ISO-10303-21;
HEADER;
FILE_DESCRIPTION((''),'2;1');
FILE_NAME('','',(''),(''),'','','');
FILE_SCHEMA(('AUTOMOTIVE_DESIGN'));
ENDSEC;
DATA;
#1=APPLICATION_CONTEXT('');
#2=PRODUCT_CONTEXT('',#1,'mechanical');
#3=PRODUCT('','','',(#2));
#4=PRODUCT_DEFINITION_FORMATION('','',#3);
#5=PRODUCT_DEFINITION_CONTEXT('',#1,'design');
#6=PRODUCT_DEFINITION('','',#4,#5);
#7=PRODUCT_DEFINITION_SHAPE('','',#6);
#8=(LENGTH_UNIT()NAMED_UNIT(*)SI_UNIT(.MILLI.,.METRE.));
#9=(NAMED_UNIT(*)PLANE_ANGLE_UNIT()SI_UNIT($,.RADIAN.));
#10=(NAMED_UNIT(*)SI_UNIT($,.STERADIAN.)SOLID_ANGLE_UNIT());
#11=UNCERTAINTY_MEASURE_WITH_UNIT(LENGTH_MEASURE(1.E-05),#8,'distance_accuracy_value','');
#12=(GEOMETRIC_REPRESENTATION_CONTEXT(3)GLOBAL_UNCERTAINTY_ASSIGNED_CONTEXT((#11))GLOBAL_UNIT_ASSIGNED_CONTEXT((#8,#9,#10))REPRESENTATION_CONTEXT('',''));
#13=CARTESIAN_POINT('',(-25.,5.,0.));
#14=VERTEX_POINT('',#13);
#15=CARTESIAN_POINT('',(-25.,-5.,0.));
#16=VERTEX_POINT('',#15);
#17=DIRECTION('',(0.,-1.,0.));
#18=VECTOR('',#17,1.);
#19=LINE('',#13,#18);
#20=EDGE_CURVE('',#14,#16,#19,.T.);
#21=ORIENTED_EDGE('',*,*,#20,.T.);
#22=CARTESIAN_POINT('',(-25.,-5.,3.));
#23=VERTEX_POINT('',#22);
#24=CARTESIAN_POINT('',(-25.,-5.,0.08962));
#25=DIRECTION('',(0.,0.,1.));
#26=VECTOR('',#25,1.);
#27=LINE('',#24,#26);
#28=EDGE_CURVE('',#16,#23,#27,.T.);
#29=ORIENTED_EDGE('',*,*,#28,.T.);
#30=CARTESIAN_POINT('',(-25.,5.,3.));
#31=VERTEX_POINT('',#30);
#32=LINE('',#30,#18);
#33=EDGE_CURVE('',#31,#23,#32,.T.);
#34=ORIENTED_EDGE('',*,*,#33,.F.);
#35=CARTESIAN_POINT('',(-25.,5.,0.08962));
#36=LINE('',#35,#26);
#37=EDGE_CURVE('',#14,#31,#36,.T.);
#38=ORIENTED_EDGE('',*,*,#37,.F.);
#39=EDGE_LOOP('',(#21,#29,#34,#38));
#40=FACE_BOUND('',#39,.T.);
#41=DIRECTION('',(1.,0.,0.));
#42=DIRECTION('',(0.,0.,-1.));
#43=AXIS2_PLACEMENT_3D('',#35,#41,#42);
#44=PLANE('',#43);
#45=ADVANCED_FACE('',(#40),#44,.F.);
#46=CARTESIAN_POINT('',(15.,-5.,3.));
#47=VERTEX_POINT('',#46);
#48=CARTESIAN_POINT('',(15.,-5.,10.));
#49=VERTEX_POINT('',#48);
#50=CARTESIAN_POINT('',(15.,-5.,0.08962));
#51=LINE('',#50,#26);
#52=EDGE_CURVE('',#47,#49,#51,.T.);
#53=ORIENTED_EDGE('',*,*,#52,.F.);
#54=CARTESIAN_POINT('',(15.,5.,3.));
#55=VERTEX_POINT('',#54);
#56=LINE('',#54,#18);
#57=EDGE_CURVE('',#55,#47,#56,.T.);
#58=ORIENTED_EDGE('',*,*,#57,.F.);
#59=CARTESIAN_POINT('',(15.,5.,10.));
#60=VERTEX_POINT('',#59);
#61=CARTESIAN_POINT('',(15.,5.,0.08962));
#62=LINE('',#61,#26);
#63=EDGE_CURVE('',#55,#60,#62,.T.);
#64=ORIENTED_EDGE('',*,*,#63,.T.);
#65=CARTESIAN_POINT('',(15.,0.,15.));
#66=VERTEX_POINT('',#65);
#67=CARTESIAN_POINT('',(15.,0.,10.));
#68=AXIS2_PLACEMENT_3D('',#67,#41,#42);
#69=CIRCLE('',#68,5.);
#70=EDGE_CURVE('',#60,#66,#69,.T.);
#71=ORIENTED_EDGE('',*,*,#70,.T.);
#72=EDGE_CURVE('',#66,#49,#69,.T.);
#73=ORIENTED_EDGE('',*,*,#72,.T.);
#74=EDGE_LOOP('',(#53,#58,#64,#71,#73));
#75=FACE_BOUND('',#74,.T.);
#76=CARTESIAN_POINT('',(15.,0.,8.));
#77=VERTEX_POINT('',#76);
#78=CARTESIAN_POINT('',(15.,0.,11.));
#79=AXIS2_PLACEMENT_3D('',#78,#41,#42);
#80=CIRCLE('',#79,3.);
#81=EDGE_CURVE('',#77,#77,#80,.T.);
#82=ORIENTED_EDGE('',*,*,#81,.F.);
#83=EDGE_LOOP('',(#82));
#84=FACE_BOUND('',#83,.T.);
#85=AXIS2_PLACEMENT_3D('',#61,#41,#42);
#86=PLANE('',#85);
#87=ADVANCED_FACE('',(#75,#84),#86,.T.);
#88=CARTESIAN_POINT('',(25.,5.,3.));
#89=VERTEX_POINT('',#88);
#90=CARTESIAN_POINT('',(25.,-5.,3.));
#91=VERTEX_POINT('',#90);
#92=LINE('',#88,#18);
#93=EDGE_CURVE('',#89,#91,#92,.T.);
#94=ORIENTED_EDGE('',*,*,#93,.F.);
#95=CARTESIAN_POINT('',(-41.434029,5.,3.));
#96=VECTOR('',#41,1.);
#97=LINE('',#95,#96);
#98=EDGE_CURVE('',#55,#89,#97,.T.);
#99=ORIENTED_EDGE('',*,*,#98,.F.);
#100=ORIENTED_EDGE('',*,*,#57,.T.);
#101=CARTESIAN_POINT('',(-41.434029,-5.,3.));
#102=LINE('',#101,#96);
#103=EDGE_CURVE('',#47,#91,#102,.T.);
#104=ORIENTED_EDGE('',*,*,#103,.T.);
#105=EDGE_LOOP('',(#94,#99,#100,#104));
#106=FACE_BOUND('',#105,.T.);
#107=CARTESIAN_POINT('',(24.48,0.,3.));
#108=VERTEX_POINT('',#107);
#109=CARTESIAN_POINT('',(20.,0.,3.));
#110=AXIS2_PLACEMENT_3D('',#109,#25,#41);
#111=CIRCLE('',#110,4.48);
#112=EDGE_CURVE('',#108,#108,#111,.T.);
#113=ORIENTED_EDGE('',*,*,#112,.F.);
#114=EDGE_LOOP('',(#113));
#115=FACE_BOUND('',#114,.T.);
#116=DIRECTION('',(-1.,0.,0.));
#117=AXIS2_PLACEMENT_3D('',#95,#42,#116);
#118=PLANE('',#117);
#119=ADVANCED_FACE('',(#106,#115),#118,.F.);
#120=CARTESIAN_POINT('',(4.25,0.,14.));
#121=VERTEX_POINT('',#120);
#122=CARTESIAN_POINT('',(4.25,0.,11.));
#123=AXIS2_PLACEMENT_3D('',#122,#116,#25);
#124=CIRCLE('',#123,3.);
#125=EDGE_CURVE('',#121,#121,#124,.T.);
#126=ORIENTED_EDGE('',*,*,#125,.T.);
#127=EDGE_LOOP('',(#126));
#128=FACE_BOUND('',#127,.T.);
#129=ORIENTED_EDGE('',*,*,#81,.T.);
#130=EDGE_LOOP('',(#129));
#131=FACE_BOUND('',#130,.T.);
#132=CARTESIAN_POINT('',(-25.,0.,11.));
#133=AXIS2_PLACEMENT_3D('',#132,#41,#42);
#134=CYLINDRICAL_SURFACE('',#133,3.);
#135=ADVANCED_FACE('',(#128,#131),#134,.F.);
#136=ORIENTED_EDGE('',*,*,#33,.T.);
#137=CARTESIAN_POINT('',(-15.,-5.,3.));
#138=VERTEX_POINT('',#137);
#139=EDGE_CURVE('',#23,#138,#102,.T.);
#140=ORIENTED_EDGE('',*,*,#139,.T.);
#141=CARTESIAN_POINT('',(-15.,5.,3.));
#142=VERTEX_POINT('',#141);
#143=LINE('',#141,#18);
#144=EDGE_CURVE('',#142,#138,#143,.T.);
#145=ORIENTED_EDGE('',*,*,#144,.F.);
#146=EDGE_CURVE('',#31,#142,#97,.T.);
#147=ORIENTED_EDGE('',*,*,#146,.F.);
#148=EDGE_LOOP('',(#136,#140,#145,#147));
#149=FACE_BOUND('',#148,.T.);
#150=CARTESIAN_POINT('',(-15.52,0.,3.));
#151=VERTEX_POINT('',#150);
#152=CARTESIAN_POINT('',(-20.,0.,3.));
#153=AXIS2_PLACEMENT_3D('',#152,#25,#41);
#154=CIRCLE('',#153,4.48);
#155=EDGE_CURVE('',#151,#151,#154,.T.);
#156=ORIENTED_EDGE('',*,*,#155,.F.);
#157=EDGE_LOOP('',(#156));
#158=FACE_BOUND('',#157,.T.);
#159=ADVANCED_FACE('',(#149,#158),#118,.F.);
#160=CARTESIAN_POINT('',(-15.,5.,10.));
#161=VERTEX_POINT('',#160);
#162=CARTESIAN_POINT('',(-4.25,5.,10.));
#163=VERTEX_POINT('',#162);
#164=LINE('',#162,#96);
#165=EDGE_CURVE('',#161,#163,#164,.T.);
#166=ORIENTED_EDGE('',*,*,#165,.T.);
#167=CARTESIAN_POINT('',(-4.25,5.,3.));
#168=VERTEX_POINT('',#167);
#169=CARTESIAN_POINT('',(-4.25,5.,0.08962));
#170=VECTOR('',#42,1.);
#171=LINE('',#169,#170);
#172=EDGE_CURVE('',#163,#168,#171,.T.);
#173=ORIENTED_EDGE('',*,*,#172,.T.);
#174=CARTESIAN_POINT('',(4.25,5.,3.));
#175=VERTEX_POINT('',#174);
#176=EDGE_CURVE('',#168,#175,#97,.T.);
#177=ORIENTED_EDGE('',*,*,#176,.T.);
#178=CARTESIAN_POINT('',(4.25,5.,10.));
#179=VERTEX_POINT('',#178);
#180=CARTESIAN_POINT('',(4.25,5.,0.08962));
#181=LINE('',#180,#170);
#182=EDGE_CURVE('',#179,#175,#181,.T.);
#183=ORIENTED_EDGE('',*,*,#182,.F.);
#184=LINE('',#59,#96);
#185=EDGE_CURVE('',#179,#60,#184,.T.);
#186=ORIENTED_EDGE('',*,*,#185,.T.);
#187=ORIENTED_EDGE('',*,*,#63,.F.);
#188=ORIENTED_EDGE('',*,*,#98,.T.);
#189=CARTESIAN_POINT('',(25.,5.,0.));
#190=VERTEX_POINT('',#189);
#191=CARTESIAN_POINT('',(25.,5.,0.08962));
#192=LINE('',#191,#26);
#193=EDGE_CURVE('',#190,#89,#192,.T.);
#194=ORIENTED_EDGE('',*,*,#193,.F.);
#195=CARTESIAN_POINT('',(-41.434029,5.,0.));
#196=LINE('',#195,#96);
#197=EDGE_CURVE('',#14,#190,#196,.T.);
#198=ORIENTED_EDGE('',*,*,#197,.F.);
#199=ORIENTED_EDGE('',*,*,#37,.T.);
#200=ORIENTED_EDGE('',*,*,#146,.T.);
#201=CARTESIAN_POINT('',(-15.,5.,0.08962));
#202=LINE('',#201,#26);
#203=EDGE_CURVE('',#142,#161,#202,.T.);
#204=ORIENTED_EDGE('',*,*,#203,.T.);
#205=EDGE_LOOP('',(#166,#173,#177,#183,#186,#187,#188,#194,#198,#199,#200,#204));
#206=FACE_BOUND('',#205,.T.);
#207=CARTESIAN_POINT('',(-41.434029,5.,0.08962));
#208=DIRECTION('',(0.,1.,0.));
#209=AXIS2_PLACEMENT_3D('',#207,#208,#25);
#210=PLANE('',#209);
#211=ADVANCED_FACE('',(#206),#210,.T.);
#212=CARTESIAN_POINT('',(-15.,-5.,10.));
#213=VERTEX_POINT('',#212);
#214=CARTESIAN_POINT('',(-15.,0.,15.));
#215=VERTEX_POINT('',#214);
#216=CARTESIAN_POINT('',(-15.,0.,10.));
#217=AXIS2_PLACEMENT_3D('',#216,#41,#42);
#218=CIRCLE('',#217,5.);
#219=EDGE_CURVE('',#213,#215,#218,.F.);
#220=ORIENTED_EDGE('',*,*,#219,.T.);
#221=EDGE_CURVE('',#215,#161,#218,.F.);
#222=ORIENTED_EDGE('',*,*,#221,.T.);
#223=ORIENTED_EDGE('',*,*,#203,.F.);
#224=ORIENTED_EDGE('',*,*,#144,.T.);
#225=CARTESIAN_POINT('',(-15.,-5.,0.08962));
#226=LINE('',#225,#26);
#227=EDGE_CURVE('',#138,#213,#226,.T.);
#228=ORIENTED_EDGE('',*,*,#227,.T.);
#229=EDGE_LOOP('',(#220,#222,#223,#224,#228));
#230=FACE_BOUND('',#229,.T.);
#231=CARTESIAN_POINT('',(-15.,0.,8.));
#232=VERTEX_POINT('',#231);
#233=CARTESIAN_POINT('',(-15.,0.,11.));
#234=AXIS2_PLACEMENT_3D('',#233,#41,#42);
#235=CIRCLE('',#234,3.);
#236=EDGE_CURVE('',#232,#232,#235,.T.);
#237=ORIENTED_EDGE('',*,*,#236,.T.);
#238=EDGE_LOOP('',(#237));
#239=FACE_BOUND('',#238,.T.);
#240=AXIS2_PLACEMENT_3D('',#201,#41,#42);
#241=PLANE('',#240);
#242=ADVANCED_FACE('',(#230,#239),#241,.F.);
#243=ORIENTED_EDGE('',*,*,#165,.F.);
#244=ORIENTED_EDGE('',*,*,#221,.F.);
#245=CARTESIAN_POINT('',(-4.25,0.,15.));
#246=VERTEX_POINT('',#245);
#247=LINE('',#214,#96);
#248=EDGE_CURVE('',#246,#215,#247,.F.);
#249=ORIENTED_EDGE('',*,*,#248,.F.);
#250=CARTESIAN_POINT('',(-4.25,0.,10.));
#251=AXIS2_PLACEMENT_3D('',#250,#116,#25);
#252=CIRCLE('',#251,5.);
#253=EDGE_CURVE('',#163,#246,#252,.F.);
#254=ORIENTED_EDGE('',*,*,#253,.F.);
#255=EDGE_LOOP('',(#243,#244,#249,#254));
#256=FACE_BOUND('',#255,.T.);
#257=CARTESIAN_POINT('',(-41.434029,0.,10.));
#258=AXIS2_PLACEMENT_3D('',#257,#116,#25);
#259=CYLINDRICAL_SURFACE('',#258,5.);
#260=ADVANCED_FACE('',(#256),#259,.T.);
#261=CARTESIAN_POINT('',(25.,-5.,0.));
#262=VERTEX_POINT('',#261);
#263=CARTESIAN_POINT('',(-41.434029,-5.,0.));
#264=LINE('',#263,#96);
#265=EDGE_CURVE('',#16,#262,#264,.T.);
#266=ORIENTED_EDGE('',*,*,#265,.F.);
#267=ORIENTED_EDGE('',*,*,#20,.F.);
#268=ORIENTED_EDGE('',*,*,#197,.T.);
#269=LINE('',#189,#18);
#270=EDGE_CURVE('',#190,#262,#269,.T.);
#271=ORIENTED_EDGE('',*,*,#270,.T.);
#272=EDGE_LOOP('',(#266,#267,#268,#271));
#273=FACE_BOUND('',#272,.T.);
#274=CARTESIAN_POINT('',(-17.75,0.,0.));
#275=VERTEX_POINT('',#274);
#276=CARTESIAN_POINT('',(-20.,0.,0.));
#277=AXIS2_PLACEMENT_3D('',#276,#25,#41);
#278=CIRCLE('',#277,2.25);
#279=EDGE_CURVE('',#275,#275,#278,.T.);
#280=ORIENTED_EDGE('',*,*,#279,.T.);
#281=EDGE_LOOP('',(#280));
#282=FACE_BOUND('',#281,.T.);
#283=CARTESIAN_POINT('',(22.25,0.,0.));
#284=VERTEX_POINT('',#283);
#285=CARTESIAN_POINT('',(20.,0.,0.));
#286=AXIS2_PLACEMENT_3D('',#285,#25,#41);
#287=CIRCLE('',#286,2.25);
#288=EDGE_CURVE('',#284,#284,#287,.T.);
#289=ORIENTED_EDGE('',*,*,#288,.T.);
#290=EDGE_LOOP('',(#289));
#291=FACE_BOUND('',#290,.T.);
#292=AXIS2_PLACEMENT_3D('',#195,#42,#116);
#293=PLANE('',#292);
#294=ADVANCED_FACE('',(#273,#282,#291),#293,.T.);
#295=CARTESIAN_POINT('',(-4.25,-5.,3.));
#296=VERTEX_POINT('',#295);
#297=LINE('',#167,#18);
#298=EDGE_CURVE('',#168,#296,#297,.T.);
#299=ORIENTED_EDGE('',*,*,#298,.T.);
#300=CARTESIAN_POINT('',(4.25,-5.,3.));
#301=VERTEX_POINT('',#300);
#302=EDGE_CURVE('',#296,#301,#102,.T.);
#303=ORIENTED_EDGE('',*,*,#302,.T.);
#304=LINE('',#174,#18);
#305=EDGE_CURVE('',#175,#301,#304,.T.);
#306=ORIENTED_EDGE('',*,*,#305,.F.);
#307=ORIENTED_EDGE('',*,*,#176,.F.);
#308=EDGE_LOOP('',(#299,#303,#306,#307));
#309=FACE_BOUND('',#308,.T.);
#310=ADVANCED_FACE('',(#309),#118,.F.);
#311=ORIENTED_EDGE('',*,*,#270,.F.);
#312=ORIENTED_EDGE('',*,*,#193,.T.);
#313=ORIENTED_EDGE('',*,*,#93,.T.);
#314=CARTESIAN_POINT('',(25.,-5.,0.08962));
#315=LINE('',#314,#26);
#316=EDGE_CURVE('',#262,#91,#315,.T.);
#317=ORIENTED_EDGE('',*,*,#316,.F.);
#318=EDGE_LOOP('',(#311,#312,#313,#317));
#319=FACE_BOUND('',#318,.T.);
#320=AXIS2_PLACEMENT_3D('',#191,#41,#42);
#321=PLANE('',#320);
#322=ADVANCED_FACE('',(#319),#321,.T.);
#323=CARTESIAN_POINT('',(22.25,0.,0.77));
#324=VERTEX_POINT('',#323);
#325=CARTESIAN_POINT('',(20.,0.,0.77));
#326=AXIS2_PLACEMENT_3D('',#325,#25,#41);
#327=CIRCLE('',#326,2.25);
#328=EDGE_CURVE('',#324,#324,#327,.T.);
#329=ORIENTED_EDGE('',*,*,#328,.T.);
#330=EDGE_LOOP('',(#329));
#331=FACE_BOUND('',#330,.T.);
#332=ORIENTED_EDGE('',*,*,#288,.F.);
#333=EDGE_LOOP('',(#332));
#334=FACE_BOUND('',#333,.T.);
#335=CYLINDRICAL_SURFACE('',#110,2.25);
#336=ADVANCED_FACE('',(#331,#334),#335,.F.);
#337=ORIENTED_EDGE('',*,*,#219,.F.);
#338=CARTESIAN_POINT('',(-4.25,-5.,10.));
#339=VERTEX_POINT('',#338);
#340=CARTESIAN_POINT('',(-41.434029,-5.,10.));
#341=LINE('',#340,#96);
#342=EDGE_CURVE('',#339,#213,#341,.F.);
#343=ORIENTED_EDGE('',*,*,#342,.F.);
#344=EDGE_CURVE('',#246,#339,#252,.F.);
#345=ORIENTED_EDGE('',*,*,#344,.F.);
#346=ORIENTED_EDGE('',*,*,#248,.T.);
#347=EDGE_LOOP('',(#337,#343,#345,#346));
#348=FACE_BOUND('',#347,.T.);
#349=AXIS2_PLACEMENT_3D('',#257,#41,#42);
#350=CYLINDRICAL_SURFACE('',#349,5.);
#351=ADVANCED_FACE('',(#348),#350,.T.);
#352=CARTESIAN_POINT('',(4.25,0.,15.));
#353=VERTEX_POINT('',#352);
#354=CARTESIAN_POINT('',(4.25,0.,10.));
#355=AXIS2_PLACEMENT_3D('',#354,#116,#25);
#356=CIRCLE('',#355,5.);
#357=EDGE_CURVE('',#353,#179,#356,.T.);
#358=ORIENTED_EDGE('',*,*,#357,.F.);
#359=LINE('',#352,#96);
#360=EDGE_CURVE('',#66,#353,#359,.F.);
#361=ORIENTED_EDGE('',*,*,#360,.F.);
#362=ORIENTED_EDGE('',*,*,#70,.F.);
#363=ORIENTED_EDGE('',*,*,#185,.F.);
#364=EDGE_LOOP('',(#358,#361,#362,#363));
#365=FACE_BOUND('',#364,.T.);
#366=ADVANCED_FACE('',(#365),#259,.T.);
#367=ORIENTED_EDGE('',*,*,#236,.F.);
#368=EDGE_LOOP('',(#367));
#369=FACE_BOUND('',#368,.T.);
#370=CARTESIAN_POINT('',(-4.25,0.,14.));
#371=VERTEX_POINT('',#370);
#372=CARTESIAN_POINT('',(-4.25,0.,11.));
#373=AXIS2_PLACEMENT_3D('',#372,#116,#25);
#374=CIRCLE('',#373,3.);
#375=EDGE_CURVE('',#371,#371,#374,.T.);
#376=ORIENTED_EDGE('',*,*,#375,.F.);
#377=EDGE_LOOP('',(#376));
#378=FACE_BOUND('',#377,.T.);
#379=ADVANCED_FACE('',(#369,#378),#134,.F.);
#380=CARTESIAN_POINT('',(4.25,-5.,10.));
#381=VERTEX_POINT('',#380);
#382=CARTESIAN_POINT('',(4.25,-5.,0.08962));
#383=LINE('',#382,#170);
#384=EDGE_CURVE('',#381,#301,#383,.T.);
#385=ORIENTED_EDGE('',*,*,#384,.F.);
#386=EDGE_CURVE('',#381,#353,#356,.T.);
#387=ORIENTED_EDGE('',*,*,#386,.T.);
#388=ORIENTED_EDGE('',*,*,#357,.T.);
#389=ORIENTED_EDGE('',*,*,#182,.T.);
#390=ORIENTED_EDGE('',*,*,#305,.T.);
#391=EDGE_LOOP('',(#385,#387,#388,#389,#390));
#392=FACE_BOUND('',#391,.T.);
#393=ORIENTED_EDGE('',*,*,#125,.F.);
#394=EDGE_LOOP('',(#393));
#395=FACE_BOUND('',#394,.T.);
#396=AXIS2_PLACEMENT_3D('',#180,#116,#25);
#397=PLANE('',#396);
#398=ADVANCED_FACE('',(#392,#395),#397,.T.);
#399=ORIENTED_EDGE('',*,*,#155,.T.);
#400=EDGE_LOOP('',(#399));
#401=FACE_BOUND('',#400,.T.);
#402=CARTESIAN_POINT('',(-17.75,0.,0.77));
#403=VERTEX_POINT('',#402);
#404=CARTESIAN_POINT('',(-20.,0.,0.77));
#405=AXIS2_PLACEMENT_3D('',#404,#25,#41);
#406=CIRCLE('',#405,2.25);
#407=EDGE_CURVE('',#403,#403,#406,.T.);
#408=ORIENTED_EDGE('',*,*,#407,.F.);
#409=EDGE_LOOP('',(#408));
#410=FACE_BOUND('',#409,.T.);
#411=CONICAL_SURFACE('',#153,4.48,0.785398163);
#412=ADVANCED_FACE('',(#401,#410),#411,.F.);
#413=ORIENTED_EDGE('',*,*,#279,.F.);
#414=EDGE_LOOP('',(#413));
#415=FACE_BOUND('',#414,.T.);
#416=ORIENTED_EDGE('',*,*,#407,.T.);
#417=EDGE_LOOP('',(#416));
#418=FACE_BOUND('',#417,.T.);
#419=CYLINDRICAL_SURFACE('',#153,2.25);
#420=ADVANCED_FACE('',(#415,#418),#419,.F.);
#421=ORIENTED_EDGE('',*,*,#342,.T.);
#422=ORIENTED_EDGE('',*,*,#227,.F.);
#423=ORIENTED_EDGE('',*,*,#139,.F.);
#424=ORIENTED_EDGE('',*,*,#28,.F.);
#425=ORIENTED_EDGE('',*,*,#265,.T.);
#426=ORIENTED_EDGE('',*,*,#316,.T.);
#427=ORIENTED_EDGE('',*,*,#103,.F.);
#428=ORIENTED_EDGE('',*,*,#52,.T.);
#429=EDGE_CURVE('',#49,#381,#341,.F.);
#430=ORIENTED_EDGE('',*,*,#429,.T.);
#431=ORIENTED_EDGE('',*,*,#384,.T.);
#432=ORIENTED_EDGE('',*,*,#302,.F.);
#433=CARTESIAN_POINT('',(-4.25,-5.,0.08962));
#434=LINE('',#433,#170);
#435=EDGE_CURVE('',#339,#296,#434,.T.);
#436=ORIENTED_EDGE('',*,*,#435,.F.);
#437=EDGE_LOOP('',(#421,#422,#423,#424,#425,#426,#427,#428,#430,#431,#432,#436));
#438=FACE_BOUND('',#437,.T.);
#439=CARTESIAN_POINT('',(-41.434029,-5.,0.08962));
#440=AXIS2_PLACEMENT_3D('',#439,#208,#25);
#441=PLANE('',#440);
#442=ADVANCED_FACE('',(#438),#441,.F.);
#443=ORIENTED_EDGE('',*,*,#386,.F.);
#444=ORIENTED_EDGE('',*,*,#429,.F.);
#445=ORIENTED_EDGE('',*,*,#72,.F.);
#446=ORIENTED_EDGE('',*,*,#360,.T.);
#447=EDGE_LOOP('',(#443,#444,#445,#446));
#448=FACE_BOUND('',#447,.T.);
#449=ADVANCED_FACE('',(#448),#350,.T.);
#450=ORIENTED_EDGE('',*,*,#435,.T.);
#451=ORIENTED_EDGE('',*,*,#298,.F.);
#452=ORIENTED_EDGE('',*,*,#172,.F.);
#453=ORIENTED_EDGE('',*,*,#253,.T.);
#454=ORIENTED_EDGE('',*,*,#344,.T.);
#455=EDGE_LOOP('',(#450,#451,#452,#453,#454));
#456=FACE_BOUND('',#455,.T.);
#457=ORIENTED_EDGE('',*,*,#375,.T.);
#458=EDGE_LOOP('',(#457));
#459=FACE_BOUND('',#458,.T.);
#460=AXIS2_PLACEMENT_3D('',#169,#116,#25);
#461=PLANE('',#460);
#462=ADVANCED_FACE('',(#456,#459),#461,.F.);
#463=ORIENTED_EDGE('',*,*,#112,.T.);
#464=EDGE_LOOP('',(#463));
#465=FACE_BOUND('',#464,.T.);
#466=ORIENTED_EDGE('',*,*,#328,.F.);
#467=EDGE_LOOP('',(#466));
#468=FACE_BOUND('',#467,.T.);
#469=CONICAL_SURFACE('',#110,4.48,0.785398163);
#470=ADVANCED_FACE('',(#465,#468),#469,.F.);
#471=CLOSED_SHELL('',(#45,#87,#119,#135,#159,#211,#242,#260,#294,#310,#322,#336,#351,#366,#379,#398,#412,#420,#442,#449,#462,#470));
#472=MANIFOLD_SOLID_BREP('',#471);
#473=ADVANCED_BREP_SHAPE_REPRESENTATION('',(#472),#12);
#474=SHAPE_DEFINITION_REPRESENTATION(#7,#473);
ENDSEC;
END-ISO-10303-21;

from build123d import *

# Parameters (mm, degrees)
EXTRUDE_1_DEPTH             = 5
HOLE_WIZARD_M4_1_AT_2_COUNT = 2
HOLE_WIZARD_M4_1_AT_2_PITCH = 40
SKETCH_3_R                  = 3
CUT_EXTRUDE_2_DEPTH         = 44.011626335
FILLET_1_R                  = 5


with BuildPart() as part:
    # 草图1 → 拉伸1 (new, symmetric)
    with BuildSketch(Plane(origin=(0, 0, 0), x_dir=(1, 0, 0), z_dir=(0, 1, 0))):
        Polygon((4.25, -3), (4.25, -15), (15, -15), (15, -3), (25, -3), (25, 0), (-25, 0), (-25, -3), (-15, -3), (-15, -15), (-4.25, -15), (-4.25, -3), align=None)
    extrude(amount=EXTRUDE_1_DEPTH, both=True)

    # 草图2 → M4 六角凹锥坑螺钉的锥形沉头孔1 (revolve, cut)
    with BuildSketch(Plane(origin=(-20, 0, 3), x_dir=(0, -1, 0), z_dir=(1, 0, 0))):
        Polygon((0, 0), (0, 3), (2.25, 3), (2.25, 2.23), (4.48, 0), align=None)
    hole_wizard_m4_1 = revolve(axis=Axis((-20, 0, 9.35), (0, 0, -1)), mode=Mode.SUBTRACT)

    # M4 六角凹锥坑螺钉的锥形沉头孔1 at 2: M4 六角凹锥坑螺钉的锥形沉头孔1 ×2
    with Locations(*[(i * HOLE_WIZARD_M4_1_AT_2_PITCH, 0, 0) for i in range(1, HOLE_WIZARD_M4_1_AT_2_COUNT)]):
        add(hole_wizard_m4_1, mode=Mode.SUBTRACT)

    # 草图3 → 拉伸2 (cut, through all)
    with BuildSketch(Plane(origin=(15, 0, 0), x_dir=(0, 0, -1), z_dir=(1, 0, 0))):
        with Locations((-11, 0)):
            Circle(SKETCH_3_R)
    extrude(amount=-CUT_EXTRUDE_2_DEPTH, mode=Mode.SUBTRACT)

    # 圆角1
    fillet_1_edges = [part.edges().sort_by_distance(p)[0] for p in [
        (-9.625, -5, 15),
        (9.625, -5, 15),
        (9.625, 5, 15),
        (-9.625, 5, 15),
    ]]
    fillet(fillet_1_edges, radius=FILLET_1_R - 0.0001)  # a hair under: the kernel refuses the full size


solid = part.part
